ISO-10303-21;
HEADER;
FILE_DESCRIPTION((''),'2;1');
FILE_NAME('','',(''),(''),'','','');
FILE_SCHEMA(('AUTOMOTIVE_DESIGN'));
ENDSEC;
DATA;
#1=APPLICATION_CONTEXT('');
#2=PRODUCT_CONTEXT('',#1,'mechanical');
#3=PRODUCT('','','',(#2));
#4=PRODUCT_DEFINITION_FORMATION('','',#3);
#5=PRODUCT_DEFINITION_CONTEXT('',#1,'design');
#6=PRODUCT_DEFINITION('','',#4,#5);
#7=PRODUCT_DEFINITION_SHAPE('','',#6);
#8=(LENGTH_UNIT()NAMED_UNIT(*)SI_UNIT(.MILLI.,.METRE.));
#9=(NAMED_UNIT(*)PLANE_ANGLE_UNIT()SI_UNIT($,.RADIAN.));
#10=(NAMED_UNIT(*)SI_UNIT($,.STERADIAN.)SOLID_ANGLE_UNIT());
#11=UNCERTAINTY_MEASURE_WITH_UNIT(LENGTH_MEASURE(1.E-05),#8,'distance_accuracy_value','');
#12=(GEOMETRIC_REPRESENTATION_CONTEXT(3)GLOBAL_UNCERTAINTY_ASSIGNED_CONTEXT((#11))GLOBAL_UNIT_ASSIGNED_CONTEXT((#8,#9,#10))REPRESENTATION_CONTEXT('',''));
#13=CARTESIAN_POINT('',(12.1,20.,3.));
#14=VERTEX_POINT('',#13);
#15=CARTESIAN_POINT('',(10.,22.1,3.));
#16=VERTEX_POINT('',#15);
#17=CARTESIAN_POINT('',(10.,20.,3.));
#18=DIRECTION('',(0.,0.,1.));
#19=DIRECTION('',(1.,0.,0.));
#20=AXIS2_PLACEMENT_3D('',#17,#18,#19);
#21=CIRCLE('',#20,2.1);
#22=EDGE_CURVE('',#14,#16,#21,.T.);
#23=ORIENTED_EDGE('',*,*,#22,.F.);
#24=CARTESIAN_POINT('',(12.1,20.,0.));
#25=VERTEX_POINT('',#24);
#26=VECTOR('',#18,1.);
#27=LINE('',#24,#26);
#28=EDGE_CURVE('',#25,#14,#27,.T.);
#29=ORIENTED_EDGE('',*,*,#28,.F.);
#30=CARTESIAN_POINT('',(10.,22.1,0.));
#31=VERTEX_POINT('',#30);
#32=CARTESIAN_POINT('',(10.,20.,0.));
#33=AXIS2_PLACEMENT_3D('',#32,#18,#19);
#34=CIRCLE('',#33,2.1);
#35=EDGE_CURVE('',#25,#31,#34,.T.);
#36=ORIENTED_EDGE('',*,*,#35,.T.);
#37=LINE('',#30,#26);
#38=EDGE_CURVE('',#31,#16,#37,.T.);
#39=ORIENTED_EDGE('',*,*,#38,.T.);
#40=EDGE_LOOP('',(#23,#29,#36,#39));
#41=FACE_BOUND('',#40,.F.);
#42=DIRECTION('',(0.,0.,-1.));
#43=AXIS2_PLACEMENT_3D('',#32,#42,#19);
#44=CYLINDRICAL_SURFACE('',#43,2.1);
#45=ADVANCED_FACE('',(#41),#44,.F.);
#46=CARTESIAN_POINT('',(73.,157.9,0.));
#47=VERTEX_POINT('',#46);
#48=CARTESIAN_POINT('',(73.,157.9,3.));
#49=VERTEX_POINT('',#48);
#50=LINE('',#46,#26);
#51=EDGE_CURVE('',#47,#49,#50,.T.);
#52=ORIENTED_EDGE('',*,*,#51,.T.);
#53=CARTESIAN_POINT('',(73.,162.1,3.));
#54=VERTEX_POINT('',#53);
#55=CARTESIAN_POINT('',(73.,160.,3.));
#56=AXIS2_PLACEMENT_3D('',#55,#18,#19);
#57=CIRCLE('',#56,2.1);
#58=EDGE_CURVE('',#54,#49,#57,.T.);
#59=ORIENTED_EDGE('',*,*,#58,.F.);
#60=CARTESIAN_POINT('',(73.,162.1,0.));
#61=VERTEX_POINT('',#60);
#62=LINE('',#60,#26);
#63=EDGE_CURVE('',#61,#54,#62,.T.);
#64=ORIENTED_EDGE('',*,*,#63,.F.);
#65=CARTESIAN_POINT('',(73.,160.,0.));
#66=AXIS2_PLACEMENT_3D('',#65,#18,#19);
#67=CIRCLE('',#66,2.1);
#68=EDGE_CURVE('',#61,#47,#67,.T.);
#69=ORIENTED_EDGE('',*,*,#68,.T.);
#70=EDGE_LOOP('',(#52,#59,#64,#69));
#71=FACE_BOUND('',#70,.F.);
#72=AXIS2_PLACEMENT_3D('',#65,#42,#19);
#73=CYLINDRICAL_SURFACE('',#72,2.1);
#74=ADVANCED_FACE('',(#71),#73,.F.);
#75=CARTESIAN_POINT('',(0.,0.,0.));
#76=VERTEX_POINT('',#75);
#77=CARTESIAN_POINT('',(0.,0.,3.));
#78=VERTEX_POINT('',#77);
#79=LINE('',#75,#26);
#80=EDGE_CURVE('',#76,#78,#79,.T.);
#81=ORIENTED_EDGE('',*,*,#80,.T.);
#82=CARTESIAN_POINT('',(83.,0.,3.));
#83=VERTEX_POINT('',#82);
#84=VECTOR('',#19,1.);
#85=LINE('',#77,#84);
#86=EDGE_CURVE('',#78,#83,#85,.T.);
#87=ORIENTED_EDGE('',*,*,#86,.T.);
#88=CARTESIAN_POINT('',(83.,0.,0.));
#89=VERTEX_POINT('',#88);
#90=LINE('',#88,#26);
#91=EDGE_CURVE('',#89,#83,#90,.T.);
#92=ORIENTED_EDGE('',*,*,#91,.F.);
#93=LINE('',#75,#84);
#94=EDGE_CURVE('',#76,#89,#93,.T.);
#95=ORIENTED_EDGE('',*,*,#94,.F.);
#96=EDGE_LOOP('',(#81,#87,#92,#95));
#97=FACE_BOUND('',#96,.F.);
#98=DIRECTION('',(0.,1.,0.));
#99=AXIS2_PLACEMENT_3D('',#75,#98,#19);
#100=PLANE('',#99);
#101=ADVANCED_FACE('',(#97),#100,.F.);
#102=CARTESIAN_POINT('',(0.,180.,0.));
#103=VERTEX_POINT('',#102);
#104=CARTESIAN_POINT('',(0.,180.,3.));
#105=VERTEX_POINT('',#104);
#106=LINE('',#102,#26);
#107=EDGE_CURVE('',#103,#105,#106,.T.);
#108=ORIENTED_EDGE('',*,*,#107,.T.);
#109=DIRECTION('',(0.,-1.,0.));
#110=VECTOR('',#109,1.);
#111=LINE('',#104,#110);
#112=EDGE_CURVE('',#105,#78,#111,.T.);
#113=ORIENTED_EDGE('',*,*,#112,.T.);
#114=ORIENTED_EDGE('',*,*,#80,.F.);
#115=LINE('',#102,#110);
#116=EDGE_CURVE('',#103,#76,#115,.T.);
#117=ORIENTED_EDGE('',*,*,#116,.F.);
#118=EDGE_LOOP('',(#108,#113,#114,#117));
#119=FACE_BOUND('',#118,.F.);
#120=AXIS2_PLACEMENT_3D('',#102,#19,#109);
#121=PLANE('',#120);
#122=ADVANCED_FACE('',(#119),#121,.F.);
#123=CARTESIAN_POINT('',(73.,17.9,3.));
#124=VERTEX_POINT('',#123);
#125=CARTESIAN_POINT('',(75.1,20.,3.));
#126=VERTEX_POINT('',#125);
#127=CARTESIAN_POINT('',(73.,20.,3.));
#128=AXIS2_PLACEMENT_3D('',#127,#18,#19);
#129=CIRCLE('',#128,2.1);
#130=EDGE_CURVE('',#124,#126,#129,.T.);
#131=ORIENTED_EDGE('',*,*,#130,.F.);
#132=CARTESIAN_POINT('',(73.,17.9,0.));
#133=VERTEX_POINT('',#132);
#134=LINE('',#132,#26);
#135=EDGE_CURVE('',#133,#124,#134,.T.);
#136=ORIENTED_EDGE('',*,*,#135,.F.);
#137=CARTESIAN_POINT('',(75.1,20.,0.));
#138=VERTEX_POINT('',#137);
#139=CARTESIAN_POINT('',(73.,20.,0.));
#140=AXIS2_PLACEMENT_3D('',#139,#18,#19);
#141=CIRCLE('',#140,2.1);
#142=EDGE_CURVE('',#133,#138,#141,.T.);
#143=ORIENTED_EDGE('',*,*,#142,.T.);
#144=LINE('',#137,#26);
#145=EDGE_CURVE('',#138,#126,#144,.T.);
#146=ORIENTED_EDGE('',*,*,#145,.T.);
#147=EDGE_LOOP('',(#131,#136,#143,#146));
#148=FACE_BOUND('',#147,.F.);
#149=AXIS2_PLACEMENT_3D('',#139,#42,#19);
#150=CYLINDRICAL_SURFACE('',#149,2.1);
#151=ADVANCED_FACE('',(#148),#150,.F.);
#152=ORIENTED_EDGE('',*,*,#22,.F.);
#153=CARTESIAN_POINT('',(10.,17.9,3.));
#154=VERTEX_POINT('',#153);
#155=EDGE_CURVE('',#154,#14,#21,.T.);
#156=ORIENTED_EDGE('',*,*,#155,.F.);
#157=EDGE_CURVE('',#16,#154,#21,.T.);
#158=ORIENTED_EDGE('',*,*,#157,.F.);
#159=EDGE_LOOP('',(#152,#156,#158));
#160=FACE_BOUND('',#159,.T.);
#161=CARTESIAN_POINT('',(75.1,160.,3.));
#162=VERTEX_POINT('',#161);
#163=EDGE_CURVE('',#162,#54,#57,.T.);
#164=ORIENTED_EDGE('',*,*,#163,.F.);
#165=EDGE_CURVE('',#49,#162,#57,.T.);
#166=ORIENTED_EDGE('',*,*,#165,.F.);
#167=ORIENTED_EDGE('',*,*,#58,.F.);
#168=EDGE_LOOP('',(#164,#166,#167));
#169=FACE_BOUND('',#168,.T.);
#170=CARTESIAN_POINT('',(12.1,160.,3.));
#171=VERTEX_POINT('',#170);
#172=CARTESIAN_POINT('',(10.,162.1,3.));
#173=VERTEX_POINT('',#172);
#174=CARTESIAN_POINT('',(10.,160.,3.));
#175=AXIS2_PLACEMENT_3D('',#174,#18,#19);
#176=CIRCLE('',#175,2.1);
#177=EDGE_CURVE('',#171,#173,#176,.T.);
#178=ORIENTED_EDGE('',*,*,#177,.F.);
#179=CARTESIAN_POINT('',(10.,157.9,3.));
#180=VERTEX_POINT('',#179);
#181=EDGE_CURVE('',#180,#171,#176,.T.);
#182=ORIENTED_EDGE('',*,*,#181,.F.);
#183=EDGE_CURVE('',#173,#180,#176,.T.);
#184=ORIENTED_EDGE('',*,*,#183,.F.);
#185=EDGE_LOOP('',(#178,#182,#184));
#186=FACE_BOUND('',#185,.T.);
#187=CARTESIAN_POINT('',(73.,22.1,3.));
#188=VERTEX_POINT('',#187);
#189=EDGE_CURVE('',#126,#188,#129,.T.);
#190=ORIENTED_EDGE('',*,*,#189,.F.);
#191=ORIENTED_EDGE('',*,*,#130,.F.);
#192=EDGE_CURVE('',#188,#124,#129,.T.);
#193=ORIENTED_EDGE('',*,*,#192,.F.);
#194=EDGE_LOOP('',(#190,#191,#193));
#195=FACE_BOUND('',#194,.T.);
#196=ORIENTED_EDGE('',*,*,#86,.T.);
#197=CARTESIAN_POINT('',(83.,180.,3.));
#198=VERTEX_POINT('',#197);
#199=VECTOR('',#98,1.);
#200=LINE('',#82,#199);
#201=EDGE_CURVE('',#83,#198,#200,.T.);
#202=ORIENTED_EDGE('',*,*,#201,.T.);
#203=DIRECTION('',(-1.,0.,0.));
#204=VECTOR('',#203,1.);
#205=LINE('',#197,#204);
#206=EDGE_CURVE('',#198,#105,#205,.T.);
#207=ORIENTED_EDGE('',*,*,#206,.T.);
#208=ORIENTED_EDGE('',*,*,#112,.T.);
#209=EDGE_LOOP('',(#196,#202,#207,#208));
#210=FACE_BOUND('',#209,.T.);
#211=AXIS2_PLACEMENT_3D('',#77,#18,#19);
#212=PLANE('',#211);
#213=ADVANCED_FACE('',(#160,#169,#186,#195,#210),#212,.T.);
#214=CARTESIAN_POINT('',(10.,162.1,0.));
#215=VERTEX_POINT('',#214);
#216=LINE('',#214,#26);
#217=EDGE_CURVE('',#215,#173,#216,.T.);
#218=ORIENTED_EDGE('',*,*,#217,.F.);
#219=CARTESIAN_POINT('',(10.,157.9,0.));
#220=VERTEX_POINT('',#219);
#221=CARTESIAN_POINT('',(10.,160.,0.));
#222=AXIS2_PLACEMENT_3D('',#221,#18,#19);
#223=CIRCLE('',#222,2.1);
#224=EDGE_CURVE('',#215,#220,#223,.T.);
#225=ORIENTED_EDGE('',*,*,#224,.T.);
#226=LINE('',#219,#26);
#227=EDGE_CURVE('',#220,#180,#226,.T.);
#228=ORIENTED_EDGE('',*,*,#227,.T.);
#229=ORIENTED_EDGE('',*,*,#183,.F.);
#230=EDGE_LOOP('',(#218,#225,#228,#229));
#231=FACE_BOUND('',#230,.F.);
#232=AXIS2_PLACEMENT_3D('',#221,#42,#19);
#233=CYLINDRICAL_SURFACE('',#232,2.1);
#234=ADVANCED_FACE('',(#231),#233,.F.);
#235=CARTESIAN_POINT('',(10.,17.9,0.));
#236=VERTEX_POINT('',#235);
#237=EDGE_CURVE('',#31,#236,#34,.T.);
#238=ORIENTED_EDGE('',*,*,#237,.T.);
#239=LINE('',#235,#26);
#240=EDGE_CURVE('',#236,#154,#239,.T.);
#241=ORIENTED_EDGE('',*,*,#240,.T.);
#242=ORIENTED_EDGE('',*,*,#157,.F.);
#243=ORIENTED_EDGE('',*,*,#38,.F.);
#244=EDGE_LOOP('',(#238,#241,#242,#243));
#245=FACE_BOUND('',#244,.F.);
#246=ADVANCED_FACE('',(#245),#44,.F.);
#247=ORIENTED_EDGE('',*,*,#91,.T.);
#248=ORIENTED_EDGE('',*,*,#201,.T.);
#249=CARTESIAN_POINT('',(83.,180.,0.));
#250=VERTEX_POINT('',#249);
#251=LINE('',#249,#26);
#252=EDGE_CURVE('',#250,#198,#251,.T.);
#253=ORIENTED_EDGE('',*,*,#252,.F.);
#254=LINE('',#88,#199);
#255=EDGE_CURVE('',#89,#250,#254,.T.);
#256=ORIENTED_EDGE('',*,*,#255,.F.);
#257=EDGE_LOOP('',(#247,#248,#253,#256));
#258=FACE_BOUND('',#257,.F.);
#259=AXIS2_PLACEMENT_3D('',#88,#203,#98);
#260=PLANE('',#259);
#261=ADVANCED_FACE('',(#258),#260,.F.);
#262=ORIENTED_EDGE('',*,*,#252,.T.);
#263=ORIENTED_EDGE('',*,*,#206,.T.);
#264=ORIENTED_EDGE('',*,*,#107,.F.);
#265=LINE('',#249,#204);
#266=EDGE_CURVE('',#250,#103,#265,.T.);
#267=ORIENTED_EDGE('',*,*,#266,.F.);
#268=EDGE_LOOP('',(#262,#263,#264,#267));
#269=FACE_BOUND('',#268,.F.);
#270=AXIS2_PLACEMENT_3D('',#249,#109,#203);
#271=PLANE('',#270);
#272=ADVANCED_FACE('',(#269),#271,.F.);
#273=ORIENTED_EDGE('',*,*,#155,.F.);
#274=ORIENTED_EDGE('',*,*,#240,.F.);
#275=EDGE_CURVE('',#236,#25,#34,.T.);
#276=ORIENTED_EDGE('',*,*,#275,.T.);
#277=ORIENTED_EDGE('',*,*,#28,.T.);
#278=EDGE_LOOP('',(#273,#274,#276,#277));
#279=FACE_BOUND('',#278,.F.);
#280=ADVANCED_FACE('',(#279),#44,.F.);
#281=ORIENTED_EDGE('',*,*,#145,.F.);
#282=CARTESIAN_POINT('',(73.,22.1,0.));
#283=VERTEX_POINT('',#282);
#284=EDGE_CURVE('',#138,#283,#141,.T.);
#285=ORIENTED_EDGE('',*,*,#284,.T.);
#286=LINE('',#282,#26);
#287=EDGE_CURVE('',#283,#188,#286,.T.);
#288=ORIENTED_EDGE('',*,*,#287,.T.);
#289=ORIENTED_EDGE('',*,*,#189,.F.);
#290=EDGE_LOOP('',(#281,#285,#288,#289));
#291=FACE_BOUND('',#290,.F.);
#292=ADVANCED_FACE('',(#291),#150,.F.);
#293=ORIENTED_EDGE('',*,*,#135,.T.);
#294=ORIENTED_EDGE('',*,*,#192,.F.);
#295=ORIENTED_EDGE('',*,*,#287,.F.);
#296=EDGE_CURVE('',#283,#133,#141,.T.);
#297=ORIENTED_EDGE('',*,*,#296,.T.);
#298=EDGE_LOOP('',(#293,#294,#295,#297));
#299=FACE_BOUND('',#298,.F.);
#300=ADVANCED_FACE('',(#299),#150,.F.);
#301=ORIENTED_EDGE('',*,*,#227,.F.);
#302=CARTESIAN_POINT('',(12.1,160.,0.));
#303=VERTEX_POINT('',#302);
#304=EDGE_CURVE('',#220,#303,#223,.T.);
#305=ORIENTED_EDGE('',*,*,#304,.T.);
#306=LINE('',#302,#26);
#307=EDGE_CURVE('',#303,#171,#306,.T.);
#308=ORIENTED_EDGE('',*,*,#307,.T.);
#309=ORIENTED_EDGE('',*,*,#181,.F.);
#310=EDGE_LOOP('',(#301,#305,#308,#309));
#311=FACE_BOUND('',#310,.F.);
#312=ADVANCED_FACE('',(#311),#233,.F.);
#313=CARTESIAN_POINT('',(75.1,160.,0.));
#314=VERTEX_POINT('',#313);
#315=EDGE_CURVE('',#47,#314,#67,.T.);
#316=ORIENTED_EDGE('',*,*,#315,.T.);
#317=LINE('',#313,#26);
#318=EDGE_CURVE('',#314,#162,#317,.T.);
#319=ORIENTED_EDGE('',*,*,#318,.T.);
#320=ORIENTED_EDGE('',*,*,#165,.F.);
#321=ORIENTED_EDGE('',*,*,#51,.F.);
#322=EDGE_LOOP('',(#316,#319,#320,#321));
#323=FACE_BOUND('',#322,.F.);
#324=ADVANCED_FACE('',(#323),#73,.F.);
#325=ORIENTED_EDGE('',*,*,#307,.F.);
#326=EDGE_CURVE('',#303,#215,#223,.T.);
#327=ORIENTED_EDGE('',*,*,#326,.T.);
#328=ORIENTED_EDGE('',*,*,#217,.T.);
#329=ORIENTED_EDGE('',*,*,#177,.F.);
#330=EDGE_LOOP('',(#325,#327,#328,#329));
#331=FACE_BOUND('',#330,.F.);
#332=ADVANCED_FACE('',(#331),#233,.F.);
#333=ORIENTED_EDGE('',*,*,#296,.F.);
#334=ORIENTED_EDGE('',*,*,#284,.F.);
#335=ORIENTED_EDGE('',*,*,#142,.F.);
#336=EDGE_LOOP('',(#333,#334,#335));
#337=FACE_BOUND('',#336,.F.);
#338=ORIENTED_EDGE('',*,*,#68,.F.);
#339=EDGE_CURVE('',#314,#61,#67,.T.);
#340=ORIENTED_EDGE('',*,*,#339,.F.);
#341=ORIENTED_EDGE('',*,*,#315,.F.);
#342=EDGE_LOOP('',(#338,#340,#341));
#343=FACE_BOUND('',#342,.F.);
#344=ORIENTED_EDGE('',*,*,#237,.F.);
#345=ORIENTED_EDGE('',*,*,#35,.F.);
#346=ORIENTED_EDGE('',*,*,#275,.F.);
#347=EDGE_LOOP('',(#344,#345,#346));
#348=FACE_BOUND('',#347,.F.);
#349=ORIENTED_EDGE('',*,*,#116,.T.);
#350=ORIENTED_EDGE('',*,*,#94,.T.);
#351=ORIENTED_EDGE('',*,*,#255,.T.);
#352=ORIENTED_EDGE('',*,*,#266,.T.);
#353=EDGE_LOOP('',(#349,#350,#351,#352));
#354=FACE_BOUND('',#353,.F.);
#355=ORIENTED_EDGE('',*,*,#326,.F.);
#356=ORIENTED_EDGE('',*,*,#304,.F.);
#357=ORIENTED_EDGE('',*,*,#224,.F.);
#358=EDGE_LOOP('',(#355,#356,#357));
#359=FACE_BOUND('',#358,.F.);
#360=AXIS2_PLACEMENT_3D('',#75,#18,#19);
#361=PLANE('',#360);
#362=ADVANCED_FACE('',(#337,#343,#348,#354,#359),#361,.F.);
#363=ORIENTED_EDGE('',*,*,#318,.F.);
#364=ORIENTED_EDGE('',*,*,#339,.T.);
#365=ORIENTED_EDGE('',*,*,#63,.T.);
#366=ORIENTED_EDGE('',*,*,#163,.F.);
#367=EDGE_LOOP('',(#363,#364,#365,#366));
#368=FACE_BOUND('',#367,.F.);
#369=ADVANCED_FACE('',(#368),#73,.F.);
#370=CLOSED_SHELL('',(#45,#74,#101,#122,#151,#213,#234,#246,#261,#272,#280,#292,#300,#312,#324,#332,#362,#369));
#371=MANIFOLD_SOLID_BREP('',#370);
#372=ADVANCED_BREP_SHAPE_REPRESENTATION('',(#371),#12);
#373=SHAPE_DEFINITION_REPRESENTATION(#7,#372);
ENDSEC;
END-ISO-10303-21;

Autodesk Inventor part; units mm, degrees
ref_plane "YZ Plane" through (0, 0, 0) normal (1, 0, 0) x (0, 1, 0)
ref_plane "XZ Plane" through (0, 0, 0) normal (0, 1, 0) x (-1, 0, 0)
ref_plane "XY Plane" through (0, 0, 0) normal (0, 0, 1) x (1, 0, 0)
sketch "Sketch1" plane through (0, 0, 0) normal (0, 0, 1) x (1, 0, 0)
  line L0 (83, 0) -> (83, 180)
  line L1 (83, 180) -> (0, 180)
  line L2 (0, 180) -> (0, 0)
  line L3 (0, 0) -> (83, 0)
  line L4 (10, 171.8151) -> (10, 9.9445)
  line L5 (73, 174.9264) -> (73, 13.0559)
  circle A0 centre (10, 160) radius 2.1
  circle A1 centre (73, 160) radius 2.1
  circle A2 centre (10, 20) radius 2.1
  circle A3 centre (73, 20) radius 2.1
  dimension "d0" = 83
  dimension "d1" = 180
  dimension "d8" = 4.2
  dimension "d9" = 4.2
  dimension "d10" = 4.2
  dimension "d11" = 4.2
  dimension "d12" = 10
  dimension "d13" = 10
  dimension "d14" = 20
  dimension "d15" = 20
  dimension "d16" = 20
  dimension "d17" = 20
extrude "Extrusion1" add sketch "Sketch1" along normal blind 3
equation "\"d9\" = d8"
equation "\"d10\" = d8"
equation "\"d11\" = d10"
properties part number "BaseC_2" material "PMMA Plastic"
